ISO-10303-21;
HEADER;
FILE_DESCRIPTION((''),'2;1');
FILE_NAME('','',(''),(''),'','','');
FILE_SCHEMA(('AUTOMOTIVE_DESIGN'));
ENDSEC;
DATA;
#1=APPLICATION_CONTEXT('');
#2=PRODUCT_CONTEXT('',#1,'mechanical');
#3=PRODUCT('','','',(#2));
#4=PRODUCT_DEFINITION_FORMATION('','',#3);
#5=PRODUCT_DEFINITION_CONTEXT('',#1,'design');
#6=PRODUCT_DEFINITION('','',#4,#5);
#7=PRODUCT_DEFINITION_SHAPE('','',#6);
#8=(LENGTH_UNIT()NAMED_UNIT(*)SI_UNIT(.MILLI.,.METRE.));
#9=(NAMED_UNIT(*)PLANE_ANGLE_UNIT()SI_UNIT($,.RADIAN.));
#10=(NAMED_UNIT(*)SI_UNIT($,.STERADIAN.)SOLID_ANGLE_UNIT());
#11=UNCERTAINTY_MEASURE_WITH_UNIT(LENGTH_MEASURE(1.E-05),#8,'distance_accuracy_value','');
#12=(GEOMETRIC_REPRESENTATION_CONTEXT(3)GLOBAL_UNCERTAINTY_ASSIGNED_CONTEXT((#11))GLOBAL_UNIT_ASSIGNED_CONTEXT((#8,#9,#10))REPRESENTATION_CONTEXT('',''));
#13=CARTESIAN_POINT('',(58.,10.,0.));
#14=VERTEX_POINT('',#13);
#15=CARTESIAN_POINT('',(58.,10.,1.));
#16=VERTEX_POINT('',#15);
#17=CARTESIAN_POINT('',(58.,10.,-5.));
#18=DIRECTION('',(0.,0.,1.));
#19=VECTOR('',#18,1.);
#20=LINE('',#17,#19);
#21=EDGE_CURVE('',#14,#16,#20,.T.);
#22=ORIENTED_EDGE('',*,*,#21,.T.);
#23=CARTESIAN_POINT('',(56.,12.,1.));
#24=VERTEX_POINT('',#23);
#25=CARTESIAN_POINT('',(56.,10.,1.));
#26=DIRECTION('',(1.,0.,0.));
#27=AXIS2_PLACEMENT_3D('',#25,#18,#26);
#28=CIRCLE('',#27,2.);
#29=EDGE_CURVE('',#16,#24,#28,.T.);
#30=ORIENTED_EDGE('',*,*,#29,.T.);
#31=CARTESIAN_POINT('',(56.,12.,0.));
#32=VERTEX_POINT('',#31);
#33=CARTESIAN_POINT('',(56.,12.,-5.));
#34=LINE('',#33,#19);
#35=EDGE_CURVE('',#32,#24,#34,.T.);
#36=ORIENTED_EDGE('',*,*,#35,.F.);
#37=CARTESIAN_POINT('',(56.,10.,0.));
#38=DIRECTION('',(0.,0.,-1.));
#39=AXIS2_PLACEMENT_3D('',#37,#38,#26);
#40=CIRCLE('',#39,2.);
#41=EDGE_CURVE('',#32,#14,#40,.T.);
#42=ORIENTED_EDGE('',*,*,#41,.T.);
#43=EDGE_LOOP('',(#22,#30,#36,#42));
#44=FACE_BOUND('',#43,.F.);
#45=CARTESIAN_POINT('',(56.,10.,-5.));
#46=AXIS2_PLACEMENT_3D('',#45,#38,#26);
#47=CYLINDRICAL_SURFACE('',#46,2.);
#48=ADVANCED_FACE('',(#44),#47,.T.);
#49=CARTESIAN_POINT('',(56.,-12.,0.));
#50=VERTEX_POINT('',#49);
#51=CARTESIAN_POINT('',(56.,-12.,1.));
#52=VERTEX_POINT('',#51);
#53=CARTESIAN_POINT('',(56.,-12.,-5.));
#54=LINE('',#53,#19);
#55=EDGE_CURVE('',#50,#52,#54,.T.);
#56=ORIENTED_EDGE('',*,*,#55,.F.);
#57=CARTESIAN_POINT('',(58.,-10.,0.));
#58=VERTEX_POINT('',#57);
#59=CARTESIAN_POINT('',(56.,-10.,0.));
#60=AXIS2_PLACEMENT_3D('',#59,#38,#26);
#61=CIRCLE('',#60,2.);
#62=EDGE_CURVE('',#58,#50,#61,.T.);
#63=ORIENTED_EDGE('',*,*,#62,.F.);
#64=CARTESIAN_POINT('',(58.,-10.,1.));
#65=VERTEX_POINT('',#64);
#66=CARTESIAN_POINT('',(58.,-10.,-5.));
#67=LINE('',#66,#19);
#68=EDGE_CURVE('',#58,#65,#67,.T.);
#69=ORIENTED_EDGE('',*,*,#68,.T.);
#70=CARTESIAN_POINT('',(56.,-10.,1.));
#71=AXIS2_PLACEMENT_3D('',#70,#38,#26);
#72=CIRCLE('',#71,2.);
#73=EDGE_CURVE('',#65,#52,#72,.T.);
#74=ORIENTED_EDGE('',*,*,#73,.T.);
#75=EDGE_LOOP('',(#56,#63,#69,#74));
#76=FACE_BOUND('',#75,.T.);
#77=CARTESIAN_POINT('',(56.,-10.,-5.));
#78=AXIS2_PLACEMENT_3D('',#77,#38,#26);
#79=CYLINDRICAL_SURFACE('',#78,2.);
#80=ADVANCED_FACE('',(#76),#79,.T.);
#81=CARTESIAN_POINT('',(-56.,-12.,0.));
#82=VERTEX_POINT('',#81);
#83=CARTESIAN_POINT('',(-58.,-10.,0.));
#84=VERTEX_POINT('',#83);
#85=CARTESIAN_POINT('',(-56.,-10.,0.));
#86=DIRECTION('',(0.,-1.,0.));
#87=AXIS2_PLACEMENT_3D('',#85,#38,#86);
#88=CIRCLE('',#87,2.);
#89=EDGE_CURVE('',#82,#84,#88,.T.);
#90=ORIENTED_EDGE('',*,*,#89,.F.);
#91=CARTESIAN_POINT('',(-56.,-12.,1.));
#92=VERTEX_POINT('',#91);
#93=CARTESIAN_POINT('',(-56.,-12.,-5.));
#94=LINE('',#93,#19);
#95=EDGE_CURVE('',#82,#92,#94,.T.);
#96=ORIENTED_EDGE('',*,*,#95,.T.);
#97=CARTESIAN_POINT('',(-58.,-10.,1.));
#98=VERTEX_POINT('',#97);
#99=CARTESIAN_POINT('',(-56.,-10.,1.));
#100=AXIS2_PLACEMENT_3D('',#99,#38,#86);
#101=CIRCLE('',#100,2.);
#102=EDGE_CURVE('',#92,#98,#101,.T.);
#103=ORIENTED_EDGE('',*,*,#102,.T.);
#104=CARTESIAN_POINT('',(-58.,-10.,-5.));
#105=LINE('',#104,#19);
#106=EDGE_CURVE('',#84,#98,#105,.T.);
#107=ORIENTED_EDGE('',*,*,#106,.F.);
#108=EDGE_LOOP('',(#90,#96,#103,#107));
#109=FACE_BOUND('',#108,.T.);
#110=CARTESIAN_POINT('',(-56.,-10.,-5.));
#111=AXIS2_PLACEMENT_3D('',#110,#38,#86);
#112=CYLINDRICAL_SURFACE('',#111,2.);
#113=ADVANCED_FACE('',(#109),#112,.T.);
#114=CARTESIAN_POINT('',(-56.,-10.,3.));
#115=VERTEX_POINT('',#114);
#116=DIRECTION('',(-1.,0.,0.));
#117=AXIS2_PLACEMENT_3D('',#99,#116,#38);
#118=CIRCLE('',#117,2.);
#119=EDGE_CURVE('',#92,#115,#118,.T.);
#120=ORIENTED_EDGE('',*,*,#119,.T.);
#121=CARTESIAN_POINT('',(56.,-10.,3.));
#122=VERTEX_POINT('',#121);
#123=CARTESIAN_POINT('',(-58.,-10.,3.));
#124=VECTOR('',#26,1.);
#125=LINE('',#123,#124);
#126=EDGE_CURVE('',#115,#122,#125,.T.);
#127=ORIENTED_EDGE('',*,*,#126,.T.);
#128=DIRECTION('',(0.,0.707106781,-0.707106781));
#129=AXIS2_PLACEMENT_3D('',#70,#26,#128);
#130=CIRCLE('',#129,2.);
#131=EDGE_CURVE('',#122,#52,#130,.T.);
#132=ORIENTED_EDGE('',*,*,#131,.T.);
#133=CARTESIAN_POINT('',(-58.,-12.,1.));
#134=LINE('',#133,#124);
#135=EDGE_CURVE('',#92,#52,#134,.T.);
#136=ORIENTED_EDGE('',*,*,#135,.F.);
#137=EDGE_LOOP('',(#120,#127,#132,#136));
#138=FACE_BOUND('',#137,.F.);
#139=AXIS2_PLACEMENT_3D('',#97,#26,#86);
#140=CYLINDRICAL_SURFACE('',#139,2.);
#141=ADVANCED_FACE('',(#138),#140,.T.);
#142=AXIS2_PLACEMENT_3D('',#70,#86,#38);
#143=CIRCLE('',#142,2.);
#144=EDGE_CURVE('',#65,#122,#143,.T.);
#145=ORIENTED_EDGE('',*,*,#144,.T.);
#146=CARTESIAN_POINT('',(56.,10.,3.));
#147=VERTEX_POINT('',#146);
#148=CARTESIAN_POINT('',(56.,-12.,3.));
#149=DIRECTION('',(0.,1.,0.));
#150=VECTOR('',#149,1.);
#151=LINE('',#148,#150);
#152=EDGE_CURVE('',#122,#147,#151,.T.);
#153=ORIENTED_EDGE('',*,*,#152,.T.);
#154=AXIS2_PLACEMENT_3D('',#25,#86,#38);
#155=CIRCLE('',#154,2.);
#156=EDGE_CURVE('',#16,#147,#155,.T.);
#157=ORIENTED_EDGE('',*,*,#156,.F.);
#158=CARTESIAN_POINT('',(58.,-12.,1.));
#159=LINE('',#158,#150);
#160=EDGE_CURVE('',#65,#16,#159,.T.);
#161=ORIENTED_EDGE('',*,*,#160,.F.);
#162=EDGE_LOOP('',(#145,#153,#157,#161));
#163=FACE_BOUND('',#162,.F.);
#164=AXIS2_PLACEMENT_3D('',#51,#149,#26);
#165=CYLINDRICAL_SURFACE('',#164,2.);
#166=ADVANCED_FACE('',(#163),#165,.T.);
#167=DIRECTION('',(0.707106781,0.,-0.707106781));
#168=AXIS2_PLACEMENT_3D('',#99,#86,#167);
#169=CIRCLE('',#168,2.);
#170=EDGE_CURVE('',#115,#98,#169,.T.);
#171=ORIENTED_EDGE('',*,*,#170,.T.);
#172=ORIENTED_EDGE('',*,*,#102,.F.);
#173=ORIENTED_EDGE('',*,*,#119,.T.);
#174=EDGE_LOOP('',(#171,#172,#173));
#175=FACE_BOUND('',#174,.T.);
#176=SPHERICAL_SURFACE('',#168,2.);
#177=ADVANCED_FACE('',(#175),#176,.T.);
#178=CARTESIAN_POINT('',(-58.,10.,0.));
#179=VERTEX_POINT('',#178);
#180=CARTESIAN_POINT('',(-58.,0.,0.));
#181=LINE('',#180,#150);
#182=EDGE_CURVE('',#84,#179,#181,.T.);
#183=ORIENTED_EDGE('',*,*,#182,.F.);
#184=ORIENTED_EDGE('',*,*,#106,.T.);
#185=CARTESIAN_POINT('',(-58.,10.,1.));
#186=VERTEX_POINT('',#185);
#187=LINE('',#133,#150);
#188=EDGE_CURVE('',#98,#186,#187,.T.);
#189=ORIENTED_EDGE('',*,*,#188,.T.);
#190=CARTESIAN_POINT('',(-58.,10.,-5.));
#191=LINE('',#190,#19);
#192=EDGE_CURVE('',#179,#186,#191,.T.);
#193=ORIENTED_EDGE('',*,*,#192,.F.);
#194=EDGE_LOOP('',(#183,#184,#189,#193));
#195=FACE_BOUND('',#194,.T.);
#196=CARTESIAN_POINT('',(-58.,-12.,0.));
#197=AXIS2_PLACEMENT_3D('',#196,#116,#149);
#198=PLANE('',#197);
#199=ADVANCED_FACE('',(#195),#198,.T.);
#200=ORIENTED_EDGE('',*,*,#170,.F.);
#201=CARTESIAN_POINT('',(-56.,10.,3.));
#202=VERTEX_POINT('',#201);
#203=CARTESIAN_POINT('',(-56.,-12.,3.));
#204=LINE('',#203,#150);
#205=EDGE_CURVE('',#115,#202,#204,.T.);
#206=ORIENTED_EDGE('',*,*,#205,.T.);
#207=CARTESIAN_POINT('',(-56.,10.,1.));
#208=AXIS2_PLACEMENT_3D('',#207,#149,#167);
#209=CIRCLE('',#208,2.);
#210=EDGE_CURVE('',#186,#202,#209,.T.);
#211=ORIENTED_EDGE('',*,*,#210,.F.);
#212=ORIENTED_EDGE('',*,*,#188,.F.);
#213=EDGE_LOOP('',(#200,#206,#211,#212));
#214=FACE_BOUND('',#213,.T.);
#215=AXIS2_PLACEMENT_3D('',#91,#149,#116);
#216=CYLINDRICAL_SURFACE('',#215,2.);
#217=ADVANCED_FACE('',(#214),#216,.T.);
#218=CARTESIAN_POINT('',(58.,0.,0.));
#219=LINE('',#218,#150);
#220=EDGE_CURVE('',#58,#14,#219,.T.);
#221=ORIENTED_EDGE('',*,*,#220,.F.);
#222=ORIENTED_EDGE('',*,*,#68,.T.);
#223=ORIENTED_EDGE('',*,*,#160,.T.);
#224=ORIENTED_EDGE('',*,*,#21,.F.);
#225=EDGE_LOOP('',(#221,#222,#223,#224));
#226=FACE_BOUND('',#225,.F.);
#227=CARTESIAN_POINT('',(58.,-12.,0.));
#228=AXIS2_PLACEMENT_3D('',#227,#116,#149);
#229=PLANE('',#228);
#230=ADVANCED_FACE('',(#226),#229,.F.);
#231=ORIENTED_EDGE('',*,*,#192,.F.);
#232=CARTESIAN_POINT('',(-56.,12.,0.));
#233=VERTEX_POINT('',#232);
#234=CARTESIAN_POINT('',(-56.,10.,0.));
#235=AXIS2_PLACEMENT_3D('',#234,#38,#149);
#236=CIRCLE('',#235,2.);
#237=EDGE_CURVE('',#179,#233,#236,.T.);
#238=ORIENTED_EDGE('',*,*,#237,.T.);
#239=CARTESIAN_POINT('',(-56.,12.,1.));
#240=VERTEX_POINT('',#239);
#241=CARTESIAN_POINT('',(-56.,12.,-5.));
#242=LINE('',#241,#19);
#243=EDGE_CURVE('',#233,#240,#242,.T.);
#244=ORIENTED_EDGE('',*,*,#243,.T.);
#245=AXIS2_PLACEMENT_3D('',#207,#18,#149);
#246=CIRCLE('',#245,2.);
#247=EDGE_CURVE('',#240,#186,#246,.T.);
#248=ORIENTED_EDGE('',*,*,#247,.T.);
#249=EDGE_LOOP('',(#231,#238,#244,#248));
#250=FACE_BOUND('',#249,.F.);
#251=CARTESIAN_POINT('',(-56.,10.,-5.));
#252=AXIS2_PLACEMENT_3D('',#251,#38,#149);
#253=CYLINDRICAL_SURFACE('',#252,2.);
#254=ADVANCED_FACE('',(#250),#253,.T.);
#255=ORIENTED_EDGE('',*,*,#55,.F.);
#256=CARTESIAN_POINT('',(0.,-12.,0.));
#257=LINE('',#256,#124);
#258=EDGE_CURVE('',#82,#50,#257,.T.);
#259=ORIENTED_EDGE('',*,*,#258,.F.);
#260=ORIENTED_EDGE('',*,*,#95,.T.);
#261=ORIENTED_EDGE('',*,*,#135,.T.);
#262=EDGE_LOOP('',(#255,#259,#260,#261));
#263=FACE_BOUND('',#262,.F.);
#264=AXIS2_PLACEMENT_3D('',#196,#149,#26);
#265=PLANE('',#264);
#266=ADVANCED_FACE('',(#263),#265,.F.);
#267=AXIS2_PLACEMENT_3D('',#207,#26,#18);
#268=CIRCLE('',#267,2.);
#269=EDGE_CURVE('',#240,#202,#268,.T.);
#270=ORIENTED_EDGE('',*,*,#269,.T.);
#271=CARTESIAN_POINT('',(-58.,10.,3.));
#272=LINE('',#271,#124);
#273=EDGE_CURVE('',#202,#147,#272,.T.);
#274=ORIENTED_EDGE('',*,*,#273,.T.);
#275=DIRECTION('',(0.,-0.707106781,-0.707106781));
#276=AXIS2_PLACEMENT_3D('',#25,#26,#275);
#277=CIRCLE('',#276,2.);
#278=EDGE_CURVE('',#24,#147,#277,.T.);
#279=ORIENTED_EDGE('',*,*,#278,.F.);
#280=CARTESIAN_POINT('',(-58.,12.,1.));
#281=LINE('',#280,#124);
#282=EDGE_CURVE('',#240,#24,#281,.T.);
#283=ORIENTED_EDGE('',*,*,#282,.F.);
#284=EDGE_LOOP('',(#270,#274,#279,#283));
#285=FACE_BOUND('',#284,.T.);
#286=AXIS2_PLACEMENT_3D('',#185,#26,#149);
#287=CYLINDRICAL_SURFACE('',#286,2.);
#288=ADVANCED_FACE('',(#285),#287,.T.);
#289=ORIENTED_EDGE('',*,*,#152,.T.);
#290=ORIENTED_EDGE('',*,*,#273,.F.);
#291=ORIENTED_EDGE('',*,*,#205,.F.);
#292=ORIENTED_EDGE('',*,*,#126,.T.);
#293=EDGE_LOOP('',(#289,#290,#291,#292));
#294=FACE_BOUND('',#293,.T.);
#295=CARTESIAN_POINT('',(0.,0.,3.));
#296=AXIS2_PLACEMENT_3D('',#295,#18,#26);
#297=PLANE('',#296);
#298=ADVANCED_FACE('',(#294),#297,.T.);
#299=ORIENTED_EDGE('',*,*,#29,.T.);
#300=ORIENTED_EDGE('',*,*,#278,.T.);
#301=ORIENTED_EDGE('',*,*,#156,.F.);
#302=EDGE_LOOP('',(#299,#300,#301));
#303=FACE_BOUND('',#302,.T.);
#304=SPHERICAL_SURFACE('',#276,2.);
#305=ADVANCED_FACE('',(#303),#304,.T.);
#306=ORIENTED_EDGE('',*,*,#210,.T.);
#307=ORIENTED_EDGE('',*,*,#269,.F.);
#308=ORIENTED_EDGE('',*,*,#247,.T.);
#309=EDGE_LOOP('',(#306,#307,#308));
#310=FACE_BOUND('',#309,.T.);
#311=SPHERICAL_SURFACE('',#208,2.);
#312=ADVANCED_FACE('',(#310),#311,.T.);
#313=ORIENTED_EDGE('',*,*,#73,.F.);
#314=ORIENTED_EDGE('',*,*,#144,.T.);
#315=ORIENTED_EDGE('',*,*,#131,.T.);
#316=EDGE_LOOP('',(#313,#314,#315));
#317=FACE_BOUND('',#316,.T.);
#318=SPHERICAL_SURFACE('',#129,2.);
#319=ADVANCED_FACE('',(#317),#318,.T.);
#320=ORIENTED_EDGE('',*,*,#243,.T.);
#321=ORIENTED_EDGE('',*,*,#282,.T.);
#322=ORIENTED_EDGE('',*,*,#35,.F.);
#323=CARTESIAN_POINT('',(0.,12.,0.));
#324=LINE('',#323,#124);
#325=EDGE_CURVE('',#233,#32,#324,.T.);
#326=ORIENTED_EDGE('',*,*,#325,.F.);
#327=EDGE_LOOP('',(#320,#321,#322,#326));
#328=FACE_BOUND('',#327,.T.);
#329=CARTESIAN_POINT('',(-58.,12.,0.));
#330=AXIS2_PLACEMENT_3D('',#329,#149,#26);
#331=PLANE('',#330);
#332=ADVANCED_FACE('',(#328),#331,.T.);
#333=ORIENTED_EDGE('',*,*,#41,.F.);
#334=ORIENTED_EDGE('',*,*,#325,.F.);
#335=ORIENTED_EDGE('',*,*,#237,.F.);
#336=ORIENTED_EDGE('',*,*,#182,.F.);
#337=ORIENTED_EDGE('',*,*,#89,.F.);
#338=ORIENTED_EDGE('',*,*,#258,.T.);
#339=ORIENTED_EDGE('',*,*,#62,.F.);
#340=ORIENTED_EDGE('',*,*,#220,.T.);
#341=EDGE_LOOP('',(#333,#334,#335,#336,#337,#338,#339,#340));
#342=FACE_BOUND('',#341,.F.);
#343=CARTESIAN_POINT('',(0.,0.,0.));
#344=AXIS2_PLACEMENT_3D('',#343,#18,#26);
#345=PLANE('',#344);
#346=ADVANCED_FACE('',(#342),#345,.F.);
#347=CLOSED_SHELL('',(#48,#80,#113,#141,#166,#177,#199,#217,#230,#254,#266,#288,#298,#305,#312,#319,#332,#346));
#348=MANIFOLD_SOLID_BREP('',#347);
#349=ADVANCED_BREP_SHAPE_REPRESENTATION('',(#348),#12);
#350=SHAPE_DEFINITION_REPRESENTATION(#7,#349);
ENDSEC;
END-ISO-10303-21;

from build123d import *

# Parameters (mm, degrees)
F0_W         = 116
F0_H         = 24
F1_DEPTH     = 3
F2_R         = 2
F3_T1_DEPTH  = 6
F3_S5_W      = 2
F3_S5_H      = 2
F3_T6_DEPTH  = 2
F3_S11_W     = 2
F3_S11_H     = 2
F3_T12_DEPTH = 2
F3_S17_W     = 2
F3_S17_H     = 2
F3_T18_DEPTH = 2
F3_S23_W     = 2
F3_S23_H     = 2
F3_T24_DEPTH = 2


# Not quite as in the source:
# - a fillet or chamfer that OpenCascade refuses, or shapes differently, is made with other operations: its cross-section is extruded or revolved along the edge and cut away or added


with BuildPart() as f1:
    # F0 (on Top) → F1 (new body)
    with BuildSketch(Plane.XY):
        Rectangle(F0_W, F0_H)
    extrude(amount=F1_DEPTH)

    # F2
    f2_edges = [f1.edges().sort_by_distance(p)[0] for p in [
        (58, 0, 3),
        (0, 12, 3),
        (-58, 0, 3),
        (0, -12, 3),
    ]]
    fillet(f2_edges, radius=F2_R)

    # F3: fillet of radius 2 on 4 edges, made by hand

    # F3_s2 → F3_t1 (cut)
    with BuildSketch(Plane.XY.offset(-5)):
        with BuildLine():
            ThreePointArc((58, -10), (57.4142135624, -11.4142135624), (56, -12))
            Line((56, -12), (58, -12))
            Line((58, -12), (58, -10))
        make_face()
        with BuildLine():
            ThreePointArc((58, 10), (57.4142135624, 11.4142135624), (56, 12))
            Line((56, 12), (58, 12))
            Line((58, 12), (58, 10))
        make_face()
        with BuildLine():
            ThreePointArc((-56, -12), (-57.4142135624, -11.4142135624), (-58, -10))
            Line((-58, -10), (-58, -12))
            Line((-58, -12), (-56, -12))
        make_face()
        with BuildLine():
            ThreePointArc((-56, 12), (-57.4142135624, 11.4142135624), (-58, 10))
            Line((-58, 10), (-58, 12))
            Line((-58, 12), (-56, 12))
        make_face()
    extrude(amount=F3_T1_DEPTH, mode=Mode.SUBTRACT)


with BuildPart() as f3_tool4:
    # F3_s5 → F3_t6 (new body)
    with BuildSketch(Plane.XZ.offset(-10)):
        with Locations((-57, 2)):
            Rectangle(F3_S5_W, F3_S5_H)
    extrude(amount=-F3_T6_DEPTH)

    # F3_s7 → F3_t8 (revolve, cut)
    with BuildSketch(Plane(origin=(-56, 10, 1), x_dir=(0.7071067812, 0, -0.7071067812), z_dir=(0.7071067812, 0, 0.7071067812))):
        with BuildLine():
            ThreePointArc((0, -2), (2, 0), (0, 2))
            Line((0, 2), (0, -2))
        make_face()
    revolve(axis=Axis((-56, 10, 1), (0, 1, 0)), mode=Mode.SUBTRACT)


with BuildPart() as f1_1:
    add(f1.part)

    # F3_t3: cut F3_tool4
    add(f3_tool4.part, mode=Mode.SUBTRACT)


with BuildPart() as f3_tool10:
    # F3_s11 → F3_t12 (new body)
    with BuildSketch(Plane.XZ.offset(10)):
        with Locations((-57, 2)):
            Rectangle(F3_S11_W, F3_S11_H)
    extrude(amount=F3_T12_DEPTH)

    # F3_s13 → F3_t14 (revolve, cut)
    with BuildSketch(Plane(origin=(-56, -10, 1), x_dir=(0.7071067812, 0, -0.7071067812), z_dir=(-0.7071067812, 0, -0.7071067812))):
        with BuildLine():
            ThreePointArc((0, -2), (2, 0), (0, 2))
            Line((0, 2), (0, -2))
        make_face()
    revolve(axis=Axis((-56, -10, 1), (0, -1, 0)), mode=Mode.SUBTRACT)


with BuildPart() as f1_2:
    add(f1_1.part)

    # F3_t9: cut F3_tool10
    add(f3_tool10.part, mode=Mode.SUBTRACT)


with BuildPart() as f3_tool16:
    # F3_s17 → F3_t18 (new body)
    with BuildSketch(Plane.YZ.offset(56)):
        with Locations((11, 2)):
            Rectangle(F3_S17_W, F3_S17_H)
    extrude(amount=F3_T18_DEPTH)

    # F3_s19 → F3_t20 (revolve, cut)
    with BuildSketch(Plane(origin=(56, 10, 1), x_dir=(0, -0.7071067812, -0.7071067812), z_dir=(0, -0.7071067812, 0.7071067812))):
        with BuildLine():
            ThreePointArc((0, -2), (2, 0), (0, 2))
            Line((0, 2), (0, -2))
        make_face()
    revolve(axis=Axis((56, 10, 1), (1, 0, 0)), mode=Mode.SUBTRACT)


with BuildPart() as f1_3:
    add(f1_2.part)

    # F3_t15: cut F3_tool16
    add(f3_tool16.part, mode=Mode.SUBTRACT)


with BuildPart() as f3_tool22:
    # F3_s23 → F3_t24 (new body)
    with BuildSketch(Plane.YZ.offset(56)):
        with Locations((-11, 2)):
            Rectangle(F3_S23_W, F3_S23_H)
    extrude(amount=F3_T24_DEPTH)

    # F3_s25 → F3_t26 (revolve, cut)
    with BuildSketch(Plane(origin=(56, -10, 1), x_dir=(0, 0.7071067812, -0.7071067812), z_dir=(0, -0.7071067812, -0.7071067812))):
        with BuildLine():
            ThreePointArc((0, -2), (2, 0), (0, 2))
            Line((0, 2), (0, -2))
        make_face()
    revolve(axis=Axis((56, -10, 1), (1, 0, 0)), mode=Mode.SUBTRACT)


with BuildPart() as f1_4:
    add(f1_3.part)

    # F3_t21: cut F3_tool22
    add(f3_tool22.part, mode=Mode.SUBTRACT)


solid = f1_4.part
